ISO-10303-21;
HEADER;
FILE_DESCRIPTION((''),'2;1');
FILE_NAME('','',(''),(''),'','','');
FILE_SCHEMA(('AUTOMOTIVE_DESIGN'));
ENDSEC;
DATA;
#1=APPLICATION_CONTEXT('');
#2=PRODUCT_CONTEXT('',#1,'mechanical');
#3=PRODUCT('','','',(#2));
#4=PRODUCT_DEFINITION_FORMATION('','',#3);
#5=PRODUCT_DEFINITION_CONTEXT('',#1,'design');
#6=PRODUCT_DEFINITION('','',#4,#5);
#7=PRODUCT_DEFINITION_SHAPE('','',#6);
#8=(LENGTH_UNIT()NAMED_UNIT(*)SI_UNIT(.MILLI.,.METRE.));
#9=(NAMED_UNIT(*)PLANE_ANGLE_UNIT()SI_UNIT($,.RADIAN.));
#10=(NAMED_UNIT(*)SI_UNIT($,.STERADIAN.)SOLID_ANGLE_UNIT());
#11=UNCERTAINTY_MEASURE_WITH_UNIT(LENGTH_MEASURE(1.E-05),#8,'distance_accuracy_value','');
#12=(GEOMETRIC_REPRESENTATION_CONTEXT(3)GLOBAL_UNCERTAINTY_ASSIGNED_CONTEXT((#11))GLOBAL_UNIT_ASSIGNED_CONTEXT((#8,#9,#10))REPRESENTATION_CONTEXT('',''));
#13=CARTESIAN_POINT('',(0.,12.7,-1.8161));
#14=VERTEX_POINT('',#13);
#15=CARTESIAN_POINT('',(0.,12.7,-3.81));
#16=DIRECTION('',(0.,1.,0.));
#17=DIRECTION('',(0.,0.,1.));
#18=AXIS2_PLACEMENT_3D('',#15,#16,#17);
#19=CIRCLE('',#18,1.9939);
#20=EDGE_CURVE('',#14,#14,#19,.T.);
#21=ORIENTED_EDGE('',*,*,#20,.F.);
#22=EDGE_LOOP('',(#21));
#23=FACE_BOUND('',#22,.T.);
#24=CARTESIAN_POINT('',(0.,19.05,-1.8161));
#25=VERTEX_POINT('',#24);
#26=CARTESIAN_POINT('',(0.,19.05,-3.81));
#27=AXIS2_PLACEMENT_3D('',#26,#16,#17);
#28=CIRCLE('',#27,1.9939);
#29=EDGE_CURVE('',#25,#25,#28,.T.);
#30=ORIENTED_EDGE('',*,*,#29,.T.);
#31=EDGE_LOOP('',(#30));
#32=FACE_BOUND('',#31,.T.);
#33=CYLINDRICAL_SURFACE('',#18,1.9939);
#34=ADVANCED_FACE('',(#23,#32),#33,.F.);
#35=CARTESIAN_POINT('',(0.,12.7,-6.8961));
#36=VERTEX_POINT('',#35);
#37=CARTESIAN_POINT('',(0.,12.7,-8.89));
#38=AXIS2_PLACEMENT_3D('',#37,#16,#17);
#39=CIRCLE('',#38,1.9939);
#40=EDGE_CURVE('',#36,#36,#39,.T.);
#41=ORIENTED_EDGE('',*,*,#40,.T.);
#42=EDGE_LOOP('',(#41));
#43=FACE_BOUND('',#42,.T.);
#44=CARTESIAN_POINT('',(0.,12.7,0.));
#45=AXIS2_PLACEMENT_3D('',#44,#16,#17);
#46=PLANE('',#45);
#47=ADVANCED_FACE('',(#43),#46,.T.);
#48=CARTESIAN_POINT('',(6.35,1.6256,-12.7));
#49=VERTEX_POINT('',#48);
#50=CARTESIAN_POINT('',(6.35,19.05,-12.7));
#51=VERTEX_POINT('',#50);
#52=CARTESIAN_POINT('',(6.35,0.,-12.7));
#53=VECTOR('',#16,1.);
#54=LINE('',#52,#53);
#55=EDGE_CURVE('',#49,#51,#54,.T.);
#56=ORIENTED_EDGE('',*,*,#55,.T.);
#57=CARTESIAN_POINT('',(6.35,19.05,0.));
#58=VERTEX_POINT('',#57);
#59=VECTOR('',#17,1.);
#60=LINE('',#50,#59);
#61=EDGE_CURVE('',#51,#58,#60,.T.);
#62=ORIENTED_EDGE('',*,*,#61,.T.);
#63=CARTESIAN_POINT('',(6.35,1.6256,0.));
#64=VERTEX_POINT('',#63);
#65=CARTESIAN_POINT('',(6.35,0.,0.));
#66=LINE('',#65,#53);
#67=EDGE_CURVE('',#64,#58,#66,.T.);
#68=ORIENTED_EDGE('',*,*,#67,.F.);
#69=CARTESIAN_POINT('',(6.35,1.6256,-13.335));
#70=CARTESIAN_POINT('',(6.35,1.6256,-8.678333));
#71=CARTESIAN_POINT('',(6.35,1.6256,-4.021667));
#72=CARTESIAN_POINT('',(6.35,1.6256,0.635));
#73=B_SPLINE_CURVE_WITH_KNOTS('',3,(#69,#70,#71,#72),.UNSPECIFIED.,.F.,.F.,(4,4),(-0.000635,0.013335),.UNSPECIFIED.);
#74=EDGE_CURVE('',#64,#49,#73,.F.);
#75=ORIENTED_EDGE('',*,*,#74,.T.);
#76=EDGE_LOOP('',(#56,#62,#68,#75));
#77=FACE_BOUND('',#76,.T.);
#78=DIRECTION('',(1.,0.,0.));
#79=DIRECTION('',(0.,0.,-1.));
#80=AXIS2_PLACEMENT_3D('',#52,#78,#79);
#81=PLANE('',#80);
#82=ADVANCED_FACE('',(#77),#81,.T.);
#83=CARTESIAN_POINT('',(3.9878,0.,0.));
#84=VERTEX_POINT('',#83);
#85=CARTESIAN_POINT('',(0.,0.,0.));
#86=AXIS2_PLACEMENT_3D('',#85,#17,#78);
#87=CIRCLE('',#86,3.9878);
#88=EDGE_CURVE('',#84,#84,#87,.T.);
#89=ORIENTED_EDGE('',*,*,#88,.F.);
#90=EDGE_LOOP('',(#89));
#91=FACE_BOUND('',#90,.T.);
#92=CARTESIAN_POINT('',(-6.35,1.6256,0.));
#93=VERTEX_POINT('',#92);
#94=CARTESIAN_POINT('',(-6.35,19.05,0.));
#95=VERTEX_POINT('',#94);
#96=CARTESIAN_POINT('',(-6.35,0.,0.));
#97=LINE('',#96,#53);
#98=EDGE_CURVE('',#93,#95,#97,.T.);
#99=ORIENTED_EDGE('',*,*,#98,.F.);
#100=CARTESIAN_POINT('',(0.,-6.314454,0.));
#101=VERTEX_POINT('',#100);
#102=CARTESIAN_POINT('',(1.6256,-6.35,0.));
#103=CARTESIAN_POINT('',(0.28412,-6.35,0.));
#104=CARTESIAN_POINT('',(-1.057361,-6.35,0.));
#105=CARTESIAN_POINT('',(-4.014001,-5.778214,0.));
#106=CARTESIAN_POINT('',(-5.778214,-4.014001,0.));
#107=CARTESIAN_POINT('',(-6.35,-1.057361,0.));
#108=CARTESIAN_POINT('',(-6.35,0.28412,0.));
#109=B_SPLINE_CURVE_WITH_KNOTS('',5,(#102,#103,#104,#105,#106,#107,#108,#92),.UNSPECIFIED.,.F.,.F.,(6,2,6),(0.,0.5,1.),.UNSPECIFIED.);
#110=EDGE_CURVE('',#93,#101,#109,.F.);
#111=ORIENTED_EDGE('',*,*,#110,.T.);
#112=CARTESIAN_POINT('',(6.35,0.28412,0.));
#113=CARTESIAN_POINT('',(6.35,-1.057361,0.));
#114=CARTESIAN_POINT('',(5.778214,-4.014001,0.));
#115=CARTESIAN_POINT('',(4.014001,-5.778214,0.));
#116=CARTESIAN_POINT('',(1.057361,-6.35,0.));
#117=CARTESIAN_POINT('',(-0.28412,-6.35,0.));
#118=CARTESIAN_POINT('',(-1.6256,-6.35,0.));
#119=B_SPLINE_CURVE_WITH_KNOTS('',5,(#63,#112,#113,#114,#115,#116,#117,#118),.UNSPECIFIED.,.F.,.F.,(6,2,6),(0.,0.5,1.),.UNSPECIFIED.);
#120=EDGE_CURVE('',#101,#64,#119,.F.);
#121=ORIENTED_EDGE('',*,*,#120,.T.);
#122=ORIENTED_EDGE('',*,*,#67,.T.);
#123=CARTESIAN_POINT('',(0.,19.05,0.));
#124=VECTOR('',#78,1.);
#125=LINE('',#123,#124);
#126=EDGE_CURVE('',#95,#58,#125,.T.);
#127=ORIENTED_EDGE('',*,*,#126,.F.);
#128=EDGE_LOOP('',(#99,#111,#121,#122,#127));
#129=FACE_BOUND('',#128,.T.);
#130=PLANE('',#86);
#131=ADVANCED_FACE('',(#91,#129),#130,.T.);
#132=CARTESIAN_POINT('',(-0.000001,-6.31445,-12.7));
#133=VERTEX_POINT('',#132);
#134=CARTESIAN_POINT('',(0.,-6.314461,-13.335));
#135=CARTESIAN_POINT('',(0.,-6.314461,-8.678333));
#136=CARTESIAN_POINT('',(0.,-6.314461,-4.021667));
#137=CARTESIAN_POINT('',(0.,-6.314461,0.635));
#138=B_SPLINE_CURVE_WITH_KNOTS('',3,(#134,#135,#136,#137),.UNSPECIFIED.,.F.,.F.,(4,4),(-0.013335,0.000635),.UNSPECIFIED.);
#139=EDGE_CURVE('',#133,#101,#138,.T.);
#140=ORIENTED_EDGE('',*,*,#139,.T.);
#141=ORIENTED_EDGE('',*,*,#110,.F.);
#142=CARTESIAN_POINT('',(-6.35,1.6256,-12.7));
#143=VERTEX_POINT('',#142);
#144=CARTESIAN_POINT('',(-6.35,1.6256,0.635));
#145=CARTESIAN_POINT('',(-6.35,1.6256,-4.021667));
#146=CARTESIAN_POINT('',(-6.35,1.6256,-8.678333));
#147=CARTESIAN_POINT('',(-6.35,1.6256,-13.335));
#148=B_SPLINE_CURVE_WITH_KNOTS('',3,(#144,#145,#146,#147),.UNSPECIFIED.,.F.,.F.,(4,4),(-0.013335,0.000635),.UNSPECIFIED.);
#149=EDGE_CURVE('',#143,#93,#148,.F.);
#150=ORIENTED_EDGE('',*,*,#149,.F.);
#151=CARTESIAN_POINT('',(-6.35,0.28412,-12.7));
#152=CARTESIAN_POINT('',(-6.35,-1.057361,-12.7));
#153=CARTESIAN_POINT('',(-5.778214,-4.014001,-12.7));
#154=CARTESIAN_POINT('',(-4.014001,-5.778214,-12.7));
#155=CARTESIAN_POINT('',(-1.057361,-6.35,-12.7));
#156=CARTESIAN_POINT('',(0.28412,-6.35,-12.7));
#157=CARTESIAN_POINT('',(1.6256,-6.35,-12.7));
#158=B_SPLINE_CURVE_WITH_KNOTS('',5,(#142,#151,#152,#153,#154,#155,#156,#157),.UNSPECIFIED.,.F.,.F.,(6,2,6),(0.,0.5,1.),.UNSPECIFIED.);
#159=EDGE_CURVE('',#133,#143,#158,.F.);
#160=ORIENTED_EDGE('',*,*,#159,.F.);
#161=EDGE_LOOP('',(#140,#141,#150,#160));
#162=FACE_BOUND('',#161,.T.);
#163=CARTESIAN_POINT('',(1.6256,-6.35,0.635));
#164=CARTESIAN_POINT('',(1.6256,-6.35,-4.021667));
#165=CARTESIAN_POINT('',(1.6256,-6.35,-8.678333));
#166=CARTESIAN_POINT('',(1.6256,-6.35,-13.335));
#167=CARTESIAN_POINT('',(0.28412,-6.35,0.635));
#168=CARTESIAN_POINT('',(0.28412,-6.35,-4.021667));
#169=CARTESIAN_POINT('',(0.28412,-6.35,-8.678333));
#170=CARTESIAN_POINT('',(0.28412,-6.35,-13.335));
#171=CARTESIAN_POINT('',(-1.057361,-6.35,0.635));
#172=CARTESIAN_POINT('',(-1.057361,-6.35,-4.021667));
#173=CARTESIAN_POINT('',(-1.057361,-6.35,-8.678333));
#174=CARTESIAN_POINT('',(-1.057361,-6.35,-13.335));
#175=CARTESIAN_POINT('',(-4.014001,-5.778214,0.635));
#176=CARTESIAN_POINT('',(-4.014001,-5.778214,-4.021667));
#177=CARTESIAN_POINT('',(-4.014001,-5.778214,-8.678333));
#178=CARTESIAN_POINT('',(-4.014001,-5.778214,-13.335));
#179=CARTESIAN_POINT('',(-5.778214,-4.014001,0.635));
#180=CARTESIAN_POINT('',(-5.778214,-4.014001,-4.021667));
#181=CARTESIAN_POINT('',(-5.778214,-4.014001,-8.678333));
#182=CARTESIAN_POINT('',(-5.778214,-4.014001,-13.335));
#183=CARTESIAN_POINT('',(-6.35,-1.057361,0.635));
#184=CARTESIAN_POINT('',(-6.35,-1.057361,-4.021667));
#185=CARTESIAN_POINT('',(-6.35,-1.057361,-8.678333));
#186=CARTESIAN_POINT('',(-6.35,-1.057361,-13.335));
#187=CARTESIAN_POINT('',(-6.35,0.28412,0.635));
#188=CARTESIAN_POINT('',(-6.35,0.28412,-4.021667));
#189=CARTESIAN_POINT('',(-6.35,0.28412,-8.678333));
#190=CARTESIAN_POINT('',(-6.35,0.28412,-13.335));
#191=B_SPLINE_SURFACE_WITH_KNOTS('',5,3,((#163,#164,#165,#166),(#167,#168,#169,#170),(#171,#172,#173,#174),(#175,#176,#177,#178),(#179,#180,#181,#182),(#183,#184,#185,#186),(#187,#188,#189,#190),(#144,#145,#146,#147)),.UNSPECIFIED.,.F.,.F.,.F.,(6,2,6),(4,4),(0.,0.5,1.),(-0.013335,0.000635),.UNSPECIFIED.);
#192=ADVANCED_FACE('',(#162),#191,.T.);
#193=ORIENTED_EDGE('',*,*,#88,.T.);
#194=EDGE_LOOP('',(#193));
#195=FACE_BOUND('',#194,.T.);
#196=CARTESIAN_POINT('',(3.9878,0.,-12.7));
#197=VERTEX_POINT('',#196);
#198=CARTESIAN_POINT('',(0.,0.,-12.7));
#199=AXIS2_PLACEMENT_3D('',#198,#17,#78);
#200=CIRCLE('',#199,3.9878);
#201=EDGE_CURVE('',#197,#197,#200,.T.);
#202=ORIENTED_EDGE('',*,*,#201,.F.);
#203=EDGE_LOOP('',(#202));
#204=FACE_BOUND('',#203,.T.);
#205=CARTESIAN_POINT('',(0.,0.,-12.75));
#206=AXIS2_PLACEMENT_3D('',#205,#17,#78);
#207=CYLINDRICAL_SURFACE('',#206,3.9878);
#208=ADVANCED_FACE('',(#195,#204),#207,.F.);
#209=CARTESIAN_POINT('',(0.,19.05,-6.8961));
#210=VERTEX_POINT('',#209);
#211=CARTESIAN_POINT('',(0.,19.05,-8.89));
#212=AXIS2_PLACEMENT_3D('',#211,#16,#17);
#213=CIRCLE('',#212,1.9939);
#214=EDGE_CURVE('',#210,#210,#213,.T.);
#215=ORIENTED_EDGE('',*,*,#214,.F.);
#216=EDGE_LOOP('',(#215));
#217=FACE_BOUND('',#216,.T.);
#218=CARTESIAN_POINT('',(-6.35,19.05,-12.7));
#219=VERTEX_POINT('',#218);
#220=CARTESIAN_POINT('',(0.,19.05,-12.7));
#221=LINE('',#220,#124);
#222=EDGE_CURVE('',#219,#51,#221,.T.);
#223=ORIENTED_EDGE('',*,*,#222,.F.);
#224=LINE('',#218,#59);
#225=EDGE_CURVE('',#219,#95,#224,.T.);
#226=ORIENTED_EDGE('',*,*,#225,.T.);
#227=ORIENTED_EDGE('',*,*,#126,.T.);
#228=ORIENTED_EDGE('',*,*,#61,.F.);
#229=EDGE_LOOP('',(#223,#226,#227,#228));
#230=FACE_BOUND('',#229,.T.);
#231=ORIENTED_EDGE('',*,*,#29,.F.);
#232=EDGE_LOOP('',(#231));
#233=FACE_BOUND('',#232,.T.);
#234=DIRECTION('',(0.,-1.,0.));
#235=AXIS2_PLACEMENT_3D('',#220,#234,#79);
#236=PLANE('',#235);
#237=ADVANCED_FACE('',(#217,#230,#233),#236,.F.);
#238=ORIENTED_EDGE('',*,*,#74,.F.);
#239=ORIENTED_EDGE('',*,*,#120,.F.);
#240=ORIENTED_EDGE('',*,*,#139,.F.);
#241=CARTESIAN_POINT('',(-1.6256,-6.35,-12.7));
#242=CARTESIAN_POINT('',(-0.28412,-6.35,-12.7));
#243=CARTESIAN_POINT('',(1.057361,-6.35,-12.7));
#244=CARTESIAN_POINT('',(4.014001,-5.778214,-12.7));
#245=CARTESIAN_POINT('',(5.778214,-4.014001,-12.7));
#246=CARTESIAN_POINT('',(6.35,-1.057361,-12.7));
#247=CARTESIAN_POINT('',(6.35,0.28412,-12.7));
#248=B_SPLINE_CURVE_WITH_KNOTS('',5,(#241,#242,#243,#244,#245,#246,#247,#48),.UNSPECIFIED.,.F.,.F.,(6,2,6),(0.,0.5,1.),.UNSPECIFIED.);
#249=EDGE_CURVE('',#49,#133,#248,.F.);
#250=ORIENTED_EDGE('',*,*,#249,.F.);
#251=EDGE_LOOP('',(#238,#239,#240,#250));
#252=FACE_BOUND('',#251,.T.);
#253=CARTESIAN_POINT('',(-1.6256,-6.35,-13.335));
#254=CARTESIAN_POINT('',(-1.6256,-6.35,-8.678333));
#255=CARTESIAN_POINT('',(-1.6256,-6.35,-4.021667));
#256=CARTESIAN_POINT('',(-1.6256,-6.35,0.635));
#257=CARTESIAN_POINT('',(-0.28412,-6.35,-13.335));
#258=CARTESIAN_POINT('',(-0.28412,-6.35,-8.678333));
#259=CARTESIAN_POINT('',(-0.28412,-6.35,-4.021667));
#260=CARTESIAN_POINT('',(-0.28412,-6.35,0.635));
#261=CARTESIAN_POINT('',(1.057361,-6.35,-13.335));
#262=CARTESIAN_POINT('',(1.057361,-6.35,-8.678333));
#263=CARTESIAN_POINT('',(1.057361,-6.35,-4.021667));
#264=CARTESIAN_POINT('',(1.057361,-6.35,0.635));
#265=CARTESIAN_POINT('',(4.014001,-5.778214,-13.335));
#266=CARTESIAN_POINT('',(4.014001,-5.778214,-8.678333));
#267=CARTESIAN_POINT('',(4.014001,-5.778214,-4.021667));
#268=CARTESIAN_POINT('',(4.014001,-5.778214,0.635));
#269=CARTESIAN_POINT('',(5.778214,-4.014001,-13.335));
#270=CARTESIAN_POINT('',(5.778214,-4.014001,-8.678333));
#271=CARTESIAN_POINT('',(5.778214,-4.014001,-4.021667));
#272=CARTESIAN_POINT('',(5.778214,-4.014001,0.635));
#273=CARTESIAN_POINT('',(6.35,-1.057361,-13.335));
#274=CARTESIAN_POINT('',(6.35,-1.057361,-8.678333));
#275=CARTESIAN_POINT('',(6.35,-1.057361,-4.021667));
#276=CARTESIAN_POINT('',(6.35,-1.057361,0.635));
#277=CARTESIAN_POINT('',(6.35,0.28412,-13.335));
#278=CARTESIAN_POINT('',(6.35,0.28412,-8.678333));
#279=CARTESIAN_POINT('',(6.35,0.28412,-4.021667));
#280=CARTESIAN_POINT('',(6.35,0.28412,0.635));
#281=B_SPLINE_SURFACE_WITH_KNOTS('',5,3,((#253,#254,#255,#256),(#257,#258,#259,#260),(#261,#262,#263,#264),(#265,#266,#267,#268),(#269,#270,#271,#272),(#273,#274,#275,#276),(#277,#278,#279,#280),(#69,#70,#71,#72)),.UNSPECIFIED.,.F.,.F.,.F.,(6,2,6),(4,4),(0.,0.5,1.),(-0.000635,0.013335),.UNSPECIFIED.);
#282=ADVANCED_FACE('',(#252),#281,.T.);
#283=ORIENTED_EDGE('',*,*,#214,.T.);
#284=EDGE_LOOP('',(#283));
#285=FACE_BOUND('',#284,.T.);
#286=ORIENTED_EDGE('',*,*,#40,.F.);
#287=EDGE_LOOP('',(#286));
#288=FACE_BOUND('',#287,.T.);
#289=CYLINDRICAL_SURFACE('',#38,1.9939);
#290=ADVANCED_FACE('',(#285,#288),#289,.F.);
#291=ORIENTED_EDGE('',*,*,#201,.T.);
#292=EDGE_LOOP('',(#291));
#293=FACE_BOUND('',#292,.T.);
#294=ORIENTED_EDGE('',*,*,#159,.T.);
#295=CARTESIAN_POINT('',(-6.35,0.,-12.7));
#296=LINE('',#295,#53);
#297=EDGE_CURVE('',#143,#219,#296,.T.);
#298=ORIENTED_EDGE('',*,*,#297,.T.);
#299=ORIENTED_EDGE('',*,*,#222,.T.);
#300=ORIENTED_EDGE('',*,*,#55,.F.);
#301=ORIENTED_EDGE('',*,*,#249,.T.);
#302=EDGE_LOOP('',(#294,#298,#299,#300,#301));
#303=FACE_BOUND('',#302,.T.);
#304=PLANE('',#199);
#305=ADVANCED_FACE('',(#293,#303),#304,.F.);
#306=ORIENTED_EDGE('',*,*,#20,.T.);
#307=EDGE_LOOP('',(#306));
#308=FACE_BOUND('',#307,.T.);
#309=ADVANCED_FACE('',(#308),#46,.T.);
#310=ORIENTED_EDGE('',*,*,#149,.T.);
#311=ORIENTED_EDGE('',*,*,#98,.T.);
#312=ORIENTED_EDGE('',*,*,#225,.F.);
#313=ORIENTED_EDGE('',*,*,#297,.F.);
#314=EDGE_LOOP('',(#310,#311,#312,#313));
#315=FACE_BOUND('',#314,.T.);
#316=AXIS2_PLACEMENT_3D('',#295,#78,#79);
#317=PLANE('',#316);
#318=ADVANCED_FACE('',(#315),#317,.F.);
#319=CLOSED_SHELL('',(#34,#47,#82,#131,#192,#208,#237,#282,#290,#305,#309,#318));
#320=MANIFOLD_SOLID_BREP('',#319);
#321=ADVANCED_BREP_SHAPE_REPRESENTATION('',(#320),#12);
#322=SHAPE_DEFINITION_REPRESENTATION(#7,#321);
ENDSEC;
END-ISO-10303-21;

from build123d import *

# Parameters (mm, degrees)
SKETCH1_W           = 12.7
SKETCH1_H           = 12.7
SKETCH1_R           = 3.9878
BOSS_EXTRUDE1_DEPTH = 12.7
FILLET1_SIZE        = 7.9756
CUT_EXTRUDE2_DEPTH  = 6.35
SKETCH1_3_R         = 3.9878
CUT_EXTRUDE3_DEPTH  = 24.759524566


with BuildPart() as part:
    # Sketch1 → Boss-Extrude1 (new body)
    # profile 1 of 3: a face of its own
    with BuildSketch(Plane.XY):
        with Locations((0, 12.7)):
            Rectangle(SKETCH1_W, SKETCH1_H)
    # profile 2 of 3: a face of its own
    with BuildSketch(Plane.XY):
        Rectangle(SKETCH1_W, SKETCH1_H)
        Circle(SKETCH1_R, mode=Mode.SUBTRACT)
    # profile 3 of 3: a face of its own
    with BuildSketch(Plane.XY):
        Circle(SKETCH1_R)
    extrude(amount=-BOSS_EXTRUDE1_DEPTH)

    # Fillet1
    # a fillet whose section is not a circle: 7.9756 mm, written as the material it takes off along each edge
    with BuildSketch(Plane(origin=(-6.35, -6.35, 19.939), x_dir=(1, 0, 0), z_dir=(0, 0, -1)), Plane(origin=(6.35, -6.35, 19.939), x_dir=(0, 1, 0), z_dir=(0, 0, -1))) as fillet1_piece_1:
        with BuildLine():
            add(Edge.make_bspline([(FILLET1_SIZE, 0), (FILLET1_SIZE * 0.831801948466, 0), (FILLET1_SIZE * 0.663603896932, 0), (FILLET1_SIZE * 0.292893218813, -FILLET1_SIZE * 0.0716919198361), (FILLET1_SIZE * 0.0716919198361, -FILLET1_SIZE * 0.292893218813), (0, -FILLET1_SIZE * 0.663603896932), (0, -FILLET1_SIZE * 0.831801948466), (0, -FILLET1_SIZE)], knots=[0, 0, 0, 0, 0, 0, 0.5, 0.5, 1, 1, 1, 1, 1, 1], degree=5))
            Line((0, -FILLET1_SIZE), (0, 0))
            Line((0, 0), (FILLET1_SIZE, 0))
        make_face()
    extrude(amount=52.578, mode=Mode.SUBTRACT)

    # Sketch3 → Cut-Extrude2 (cut)
    with BuildSketch(Plane(origin=(0, 19.05, 0), x_dir=(1, 0, 0), z_dir=(0, 1, 0))):
        with BuildLine():
            ThreePointArc((1.9939, 8.89), (1.409900211, 10.299900211), (0, 10.8839))
            Line((0, 10.8839), (0, 8.89))
            Line((0, 8.89), (1.9939, 8.89))
        make_face()
        with BuildLine():
            Line((0, 8.89), (0, 10.8839))
            ThreePointArc((0, 10.8839), (-1.409900211, 10.299900211), (-1.9939, 8.89))
            Line((-1.9939, 8.89), (0, 8.89))
        make_face()
        with BuildLine():
            Line((1.9939, 8.89), (0, 8.89))
            Line((0, 8.89), (0, 6.8961))
            ThreePointArc((0, 6.8961), (1.409900211, 7.480099789), (1.9939, 8.89))
        make_face()
        with BuildLine():
            Line((0, 6.8961), (0, 8.89))
            Line((0, 8.89), (-1.9939, 8.89))
            ThreePointArc((-1.9939, 8.89), (-1.409900211, 7.480099789), (0, 6.8961))
        make_face()
        with BuildLine():
            ThreePointArc((1.9939, 3.81), (1.409900211, 5.219900211), (0, 5.8039))
            Line((0, 5.8039), (0, 3.81))
            Line((0, 3.81), (1.9939, 3.81))
        make_face()
        with BuildLine():
            Line((0, 3.81), (0, 5.8039))
            ThreePointArc((0, 5.8039), (-1.409900211, 5.219900211), (-1.9939, 3.81))
            Line((-1.9939, 3.81), (0, 3.81))
        make_face()
        with BuildLine():
            ThreePointArc((0, 1.8161), (1.409900211, 2.400099789), (1.9939, 3.81))
            Line((1.9939, 3.81), (0, 3.81))
            Line((0, 3.81), (0, 1.8161))
        make_face()
        with BuildLine():
            Line((0, 3.81), (-1.9939, 3.81))
            ThreePointArc((-1.9939, 3.81), (-1.409900211, 2.400099789), (0, 1.8161))
            Line((0, 1.8161), (0, 3.81))
        make_face()
    extrude(amount=-CUT_EXTRUDE2_DEPTH, mode=Mode.SUBTRACT)

    # Sketch1<3> → Cut-Extrude3 (cut, through all)
    with BuildSketch(Plane.XY):
        Circle(SKETCH1_3_R)
    extrude(amount=-CUT_EXTRUDE3_DEPTH, mode=Mode.SUBTRACT)


solid = part.part
